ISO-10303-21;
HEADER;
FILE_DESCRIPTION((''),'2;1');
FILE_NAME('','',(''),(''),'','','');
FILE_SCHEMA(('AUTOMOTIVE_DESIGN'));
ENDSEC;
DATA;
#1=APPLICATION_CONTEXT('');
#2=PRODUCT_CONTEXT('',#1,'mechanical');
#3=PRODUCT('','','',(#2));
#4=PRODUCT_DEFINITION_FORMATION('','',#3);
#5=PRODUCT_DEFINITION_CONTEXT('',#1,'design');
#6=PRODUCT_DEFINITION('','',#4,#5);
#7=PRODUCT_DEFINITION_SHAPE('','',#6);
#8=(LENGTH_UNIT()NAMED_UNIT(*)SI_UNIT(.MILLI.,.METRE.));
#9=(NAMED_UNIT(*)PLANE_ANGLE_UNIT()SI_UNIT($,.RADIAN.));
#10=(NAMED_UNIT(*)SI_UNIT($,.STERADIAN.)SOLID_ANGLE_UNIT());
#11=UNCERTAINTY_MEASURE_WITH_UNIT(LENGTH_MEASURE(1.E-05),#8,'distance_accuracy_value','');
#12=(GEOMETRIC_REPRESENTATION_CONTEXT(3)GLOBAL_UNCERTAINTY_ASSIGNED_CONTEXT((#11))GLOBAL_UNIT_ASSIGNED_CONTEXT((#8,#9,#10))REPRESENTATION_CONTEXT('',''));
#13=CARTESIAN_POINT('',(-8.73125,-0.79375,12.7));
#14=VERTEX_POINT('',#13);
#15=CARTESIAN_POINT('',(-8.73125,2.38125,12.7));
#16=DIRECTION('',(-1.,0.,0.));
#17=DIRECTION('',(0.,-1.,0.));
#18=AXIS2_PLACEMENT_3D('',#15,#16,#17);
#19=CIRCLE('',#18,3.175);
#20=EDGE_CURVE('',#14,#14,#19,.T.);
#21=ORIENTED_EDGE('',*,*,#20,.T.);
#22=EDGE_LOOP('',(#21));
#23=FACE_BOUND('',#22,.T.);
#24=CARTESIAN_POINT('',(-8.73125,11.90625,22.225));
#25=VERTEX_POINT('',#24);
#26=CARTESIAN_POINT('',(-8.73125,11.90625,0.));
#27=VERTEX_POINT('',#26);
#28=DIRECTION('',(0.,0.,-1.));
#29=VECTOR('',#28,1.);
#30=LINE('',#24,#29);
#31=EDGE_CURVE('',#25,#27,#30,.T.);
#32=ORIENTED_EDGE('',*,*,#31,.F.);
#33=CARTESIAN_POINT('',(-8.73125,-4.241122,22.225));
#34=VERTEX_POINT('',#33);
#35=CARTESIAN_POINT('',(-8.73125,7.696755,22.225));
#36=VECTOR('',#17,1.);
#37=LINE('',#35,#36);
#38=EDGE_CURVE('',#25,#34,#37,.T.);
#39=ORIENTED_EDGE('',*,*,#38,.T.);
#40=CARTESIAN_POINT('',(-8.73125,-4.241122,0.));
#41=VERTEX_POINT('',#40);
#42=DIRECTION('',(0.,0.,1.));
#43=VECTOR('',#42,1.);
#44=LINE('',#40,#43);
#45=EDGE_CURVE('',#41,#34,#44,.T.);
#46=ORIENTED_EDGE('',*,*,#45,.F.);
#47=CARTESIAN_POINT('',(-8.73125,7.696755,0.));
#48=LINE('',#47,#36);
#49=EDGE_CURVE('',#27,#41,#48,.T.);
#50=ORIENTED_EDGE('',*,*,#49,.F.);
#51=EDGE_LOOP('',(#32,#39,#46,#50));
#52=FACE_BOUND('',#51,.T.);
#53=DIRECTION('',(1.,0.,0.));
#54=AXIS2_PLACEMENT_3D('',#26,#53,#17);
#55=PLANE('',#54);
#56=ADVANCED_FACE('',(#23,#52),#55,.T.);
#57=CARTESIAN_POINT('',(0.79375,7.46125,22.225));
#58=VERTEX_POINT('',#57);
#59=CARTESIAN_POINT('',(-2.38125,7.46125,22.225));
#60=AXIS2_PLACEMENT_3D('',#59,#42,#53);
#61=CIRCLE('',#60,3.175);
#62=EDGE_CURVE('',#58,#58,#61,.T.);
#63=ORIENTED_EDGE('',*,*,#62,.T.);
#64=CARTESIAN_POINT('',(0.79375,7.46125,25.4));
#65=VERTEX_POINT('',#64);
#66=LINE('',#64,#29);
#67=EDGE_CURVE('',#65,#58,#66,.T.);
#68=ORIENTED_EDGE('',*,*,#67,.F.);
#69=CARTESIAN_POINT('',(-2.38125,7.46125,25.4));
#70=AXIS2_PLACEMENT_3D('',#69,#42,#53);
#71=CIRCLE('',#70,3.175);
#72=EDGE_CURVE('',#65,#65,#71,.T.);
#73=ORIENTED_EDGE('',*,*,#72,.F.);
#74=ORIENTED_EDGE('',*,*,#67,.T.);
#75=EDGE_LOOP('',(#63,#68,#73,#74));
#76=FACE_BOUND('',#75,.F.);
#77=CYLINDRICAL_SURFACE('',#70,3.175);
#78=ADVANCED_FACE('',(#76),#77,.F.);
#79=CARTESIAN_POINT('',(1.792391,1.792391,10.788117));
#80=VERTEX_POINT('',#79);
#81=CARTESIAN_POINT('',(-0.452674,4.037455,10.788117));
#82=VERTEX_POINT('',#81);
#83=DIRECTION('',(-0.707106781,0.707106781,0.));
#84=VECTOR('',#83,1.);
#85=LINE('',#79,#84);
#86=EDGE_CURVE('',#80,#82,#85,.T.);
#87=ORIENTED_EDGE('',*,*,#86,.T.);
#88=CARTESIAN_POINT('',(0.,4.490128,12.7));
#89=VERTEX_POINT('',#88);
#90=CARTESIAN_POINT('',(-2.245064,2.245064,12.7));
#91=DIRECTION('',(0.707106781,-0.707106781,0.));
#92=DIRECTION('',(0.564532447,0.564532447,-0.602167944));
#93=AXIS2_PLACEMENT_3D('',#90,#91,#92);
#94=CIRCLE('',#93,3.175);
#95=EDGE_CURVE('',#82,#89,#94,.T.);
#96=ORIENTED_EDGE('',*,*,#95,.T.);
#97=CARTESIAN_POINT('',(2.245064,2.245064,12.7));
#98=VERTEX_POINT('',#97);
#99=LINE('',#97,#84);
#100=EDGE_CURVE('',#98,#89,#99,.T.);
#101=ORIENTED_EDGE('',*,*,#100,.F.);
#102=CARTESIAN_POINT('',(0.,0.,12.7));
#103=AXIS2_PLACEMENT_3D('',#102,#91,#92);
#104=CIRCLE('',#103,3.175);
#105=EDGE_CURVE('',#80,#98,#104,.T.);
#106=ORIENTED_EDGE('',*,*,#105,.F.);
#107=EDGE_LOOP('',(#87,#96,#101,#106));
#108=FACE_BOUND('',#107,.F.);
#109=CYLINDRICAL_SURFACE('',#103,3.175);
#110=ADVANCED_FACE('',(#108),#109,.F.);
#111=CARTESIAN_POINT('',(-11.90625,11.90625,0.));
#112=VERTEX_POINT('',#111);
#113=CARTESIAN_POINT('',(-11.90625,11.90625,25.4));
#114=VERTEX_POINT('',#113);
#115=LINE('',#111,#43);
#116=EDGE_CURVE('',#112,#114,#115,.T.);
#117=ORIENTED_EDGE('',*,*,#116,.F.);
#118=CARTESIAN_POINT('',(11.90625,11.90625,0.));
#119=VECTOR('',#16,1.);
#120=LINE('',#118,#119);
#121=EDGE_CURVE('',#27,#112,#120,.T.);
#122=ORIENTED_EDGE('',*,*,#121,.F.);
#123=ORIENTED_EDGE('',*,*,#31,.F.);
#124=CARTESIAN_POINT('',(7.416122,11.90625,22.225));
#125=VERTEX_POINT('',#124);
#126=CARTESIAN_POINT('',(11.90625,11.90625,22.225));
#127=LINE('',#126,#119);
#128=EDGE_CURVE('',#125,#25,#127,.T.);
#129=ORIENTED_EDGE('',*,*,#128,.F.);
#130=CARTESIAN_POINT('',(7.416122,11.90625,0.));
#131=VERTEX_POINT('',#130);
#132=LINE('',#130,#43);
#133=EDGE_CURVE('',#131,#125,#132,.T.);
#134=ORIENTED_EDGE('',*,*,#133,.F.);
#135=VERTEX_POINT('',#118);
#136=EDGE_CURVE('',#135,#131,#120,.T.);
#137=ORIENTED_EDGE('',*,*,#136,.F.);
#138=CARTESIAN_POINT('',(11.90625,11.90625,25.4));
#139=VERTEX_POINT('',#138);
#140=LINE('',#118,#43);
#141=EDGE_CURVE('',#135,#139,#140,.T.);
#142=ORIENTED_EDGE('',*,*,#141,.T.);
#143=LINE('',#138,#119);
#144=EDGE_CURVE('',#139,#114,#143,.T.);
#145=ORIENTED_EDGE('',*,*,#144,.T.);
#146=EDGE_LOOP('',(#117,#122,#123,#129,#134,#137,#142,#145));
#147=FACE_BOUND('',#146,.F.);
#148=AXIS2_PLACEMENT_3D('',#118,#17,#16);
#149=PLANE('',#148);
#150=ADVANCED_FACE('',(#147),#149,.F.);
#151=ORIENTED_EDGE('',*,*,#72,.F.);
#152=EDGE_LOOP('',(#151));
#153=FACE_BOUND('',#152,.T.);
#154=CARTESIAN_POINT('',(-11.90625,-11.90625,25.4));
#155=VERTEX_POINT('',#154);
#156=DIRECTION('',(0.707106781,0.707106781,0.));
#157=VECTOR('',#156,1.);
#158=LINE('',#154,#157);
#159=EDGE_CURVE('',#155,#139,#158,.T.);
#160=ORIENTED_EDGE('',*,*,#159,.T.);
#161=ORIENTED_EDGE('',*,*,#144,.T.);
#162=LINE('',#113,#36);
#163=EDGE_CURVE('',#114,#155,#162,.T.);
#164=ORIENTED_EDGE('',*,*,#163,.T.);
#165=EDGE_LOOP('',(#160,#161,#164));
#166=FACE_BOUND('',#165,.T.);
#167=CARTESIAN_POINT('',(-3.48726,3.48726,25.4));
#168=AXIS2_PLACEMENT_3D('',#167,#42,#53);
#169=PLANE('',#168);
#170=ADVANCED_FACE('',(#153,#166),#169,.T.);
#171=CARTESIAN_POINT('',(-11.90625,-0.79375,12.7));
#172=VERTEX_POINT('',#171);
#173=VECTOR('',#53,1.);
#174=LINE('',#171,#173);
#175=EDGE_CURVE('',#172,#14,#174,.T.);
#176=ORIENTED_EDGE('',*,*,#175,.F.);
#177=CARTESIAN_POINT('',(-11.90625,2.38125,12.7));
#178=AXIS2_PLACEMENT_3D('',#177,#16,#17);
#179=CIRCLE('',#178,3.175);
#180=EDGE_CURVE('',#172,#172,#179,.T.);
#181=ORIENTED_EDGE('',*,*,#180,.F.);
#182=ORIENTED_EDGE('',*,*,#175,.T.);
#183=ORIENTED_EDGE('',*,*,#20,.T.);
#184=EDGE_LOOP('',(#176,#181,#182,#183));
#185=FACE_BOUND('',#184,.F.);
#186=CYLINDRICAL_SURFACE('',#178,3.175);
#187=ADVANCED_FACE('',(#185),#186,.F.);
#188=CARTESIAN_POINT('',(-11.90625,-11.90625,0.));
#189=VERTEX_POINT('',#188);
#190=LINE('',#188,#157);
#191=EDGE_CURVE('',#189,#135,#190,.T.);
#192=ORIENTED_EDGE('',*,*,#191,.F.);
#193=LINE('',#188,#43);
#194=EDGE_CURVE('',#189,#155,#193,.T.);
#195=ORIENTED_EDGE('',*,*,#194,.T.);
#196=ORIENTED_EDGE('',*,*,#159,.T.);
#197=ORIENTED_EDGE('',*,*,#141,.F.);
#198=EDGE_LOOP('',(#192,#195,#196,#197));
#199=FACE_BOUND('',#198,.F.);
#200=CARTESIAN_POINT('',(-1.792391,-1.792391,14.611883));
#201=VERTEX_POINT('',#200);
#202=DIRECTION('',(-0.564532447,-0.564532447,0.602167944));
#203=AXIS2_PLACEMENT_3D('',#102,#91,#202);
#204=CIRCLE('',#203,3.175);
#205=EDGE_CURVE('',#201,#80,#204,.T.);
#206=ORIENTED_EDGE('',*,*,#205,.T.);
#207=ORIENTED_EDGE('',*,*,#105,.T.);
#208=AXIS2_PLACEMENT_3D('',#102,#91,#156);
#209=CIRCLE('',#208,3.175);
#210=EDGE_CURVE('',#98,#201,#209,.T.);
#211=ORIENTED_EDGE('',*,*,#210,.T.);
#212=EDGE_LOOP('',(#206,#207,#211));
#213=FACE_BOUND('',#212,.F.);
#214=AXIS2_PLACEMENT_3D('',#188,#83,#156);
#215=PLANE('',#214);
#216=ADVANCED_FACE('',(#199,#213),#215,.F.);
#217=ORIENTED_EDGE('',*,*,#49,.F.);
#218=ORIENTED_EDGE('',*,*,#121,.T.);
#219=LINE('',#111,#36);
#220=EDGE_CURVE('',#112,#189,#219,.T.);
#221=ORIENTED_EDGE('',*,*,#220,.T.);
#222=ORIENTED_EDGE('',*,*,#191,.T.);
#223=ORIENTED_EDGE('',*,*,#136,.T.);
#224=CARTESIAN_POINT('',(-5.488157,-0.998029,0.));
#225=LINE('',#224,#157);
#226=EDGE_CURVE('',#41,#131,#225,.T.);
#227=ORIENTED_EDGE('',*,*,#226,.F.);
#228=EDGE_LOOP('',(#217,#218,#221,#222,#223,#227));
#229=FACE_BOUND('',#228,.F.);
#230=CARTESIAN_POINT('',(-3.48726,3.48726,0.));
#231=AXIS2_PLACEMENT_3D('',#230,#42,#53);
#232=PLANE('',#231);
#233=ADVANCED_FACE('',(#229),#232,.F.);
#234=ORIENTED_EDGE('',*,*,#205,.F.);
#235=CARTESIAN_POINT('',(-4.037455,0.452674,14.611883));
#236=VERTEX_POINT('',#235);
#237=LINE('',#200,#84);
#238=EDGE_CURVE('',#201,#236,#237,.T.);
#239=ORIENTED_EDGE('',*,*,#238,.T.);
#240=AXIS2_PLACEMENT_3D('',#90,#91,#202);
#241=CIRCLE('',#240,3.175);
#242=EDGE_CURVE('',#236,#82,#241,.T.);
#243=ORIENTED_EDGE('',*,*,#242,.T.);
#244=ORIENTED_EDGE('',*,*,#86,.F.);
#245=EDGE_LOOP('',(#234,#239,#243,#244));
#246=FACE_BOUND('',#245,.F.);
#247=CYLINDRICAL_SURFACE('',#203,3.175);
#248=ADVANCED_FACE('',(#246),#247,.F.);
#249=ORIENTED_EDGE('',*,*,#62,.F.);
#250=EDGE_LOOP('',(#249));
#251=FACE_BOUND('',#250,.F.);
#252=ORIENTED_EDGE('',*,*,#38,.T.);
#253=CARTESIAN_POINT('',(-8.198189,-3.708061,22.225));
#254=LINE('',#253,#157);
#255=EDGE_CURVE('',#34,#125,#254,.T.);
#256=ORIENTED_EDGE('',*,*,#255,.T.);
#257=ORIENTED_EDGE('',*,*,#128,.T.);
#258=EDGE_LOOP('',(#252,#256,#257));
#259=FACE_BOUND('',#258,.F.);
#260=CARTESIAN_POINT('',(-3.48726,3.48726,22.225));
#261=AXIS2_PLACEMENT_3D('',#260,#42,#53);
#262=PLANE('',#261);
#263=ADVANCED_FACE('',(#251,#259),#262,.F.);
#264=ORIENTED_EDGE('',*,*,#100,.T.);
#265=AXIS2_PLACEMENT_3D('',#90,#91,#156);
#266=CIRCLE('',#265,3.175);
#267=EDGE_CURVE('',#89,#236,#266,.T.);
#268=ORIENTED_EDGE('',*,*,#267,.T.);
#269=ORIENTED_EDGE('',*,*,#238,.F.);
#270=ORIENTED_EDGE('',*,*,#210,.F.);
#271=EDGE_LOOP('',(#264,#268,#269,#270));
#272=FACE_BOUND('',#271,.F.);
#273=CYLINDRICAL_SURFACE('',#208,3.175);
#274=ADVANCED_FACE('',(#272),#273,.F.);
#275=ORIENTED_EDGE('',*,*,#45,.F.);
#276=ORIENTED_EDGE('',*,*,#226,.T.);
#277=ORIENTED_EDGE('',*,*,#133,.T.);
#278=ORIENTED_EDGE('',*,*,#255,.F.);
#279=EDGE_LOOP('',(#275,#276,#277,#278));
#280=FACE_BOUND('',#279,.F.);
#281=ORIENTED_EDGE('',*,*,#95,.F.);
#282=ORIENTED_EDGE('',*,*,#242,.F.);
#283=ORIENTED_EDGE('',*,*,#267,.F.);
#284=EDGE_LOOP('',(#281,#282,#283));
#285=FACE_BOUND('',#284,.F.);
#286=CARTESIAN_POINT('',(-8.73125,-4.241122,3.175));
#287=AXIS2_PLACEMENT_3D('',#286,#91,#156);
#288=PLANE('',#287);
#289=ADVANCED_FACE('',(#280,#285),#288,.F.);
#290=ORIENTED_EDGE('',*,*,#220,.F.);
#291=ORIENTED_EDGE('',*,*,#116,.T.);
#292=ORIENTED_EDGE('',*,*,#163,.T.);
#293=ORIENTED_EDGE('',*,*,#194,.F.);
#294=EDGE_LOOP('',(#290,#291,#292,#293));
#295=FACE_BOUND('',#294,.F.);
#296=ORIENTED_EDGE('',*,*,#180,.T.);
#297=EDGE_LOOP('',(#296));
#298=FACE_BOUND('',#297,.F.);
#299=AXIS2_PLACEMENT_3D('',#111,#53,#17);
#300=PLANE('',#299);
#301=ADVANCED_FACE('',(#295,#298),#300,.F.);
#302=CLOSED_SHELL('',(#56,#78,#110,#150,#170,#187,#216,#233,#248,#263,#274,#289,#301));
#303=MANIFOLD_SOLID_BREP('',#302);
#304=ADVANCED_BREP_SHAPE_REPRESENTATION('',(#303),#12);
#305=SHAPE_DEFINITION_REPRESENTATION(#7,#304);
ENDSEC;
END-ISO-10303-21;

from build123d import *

# Parameters (mm, degrees)
F1_DEPTH = 25.4
F2_T     = -3.175
F3_DEPTH = 25.4
F4_R     = 3.175
F5_DEPTH = 3.175
F6_R     = 3.175
F7_DEPTH = 25.4
F9_DEPTH = 3.175


# Not quite as in the source:
# - a feature names something its author has since deleted; it is built from what else it names


with BuildPart() as f1:
    # F0 (on Top) → F1 (new body)
    with BuildSketch(Plane.XY):
        Polygon((11.90625, 11.90625), (-11.90625, 11.90625), (-11.90625, -11.90625), align=None)
    extrude(amount=F1_DEPTH)

    # F2
    f2_openings = [f1.faces().sort_by_distance(p)[0] for p in [
        (0, 11.90625, 12.7),
    ]]
    offset(amount=F2_T, openings=f2_openings)

    # F3 (cut): a face of the model
    f3_faces = [f1.faces().sort_by_distance(p)[0] for p in [
        (-3.3487926868, 6.5237926868, 3.175),
    ]]
    extrude(f3_faces, amount=-F3_DEPTH, mode=Mode.SUBTRACT)

    # F4 (on face) → F5 (cut)
    with BuildSketch(Plane(origin=(-11.90625, 0, 0), x_dir=(0, -1, 0), z_dir=(-1, 0, 0))):
        with Locations((-2.38125, 12.7)):
            Circle(F4_R)
    extrude(amount=-F5_DEPTH, mode=Mode.SUBTRACT)

    # F6 (on face) → F7 (cut)
    with BuildSketch(Plane.XY.offset(25.4)):
        with Locations((-2.38125, 7.46125)):
            Circle(F6_R)
    extrude(amount=-F7_DEPTH, mode=Mode.SUBTRACT)

    # F8 (on face) → F9 (cut)
    with BuildSketch(Plane(origin=(0, 0, 0), x_dir=(0.7071067812, 0.7071067812, 0), z_dir=(0.7071067812, -0.7071067812, 0))):
        with BuildLine():
            ThreePointArc((3.175, 12.7), (1.0081076412, 15.7107048982), (-2.5348229819, 14.6118832209))
            Line((-2.5348229819, 14.6118832209), (2.5348229819, 10.7881167791))
            ThreePointArc((2.5348229819, 10.7881167791), (3.0107048982, 11.6918923588), (3.175, 12.7))
        make_face()
        with BuildLine():
            Line((2.5348229819, 10.7881167791), (-2.5348229819, 14.6118832209))
            ThreePointArc((-2.5348229819, 14.6118832209), (-1.9118832209, 10.1651770181), (2.5348229819, 10.7881167791))
        make_face()
    extrude(amount=-F9_DEPTH, mode=Mode.SUBTRACT)


solid = f1.part
